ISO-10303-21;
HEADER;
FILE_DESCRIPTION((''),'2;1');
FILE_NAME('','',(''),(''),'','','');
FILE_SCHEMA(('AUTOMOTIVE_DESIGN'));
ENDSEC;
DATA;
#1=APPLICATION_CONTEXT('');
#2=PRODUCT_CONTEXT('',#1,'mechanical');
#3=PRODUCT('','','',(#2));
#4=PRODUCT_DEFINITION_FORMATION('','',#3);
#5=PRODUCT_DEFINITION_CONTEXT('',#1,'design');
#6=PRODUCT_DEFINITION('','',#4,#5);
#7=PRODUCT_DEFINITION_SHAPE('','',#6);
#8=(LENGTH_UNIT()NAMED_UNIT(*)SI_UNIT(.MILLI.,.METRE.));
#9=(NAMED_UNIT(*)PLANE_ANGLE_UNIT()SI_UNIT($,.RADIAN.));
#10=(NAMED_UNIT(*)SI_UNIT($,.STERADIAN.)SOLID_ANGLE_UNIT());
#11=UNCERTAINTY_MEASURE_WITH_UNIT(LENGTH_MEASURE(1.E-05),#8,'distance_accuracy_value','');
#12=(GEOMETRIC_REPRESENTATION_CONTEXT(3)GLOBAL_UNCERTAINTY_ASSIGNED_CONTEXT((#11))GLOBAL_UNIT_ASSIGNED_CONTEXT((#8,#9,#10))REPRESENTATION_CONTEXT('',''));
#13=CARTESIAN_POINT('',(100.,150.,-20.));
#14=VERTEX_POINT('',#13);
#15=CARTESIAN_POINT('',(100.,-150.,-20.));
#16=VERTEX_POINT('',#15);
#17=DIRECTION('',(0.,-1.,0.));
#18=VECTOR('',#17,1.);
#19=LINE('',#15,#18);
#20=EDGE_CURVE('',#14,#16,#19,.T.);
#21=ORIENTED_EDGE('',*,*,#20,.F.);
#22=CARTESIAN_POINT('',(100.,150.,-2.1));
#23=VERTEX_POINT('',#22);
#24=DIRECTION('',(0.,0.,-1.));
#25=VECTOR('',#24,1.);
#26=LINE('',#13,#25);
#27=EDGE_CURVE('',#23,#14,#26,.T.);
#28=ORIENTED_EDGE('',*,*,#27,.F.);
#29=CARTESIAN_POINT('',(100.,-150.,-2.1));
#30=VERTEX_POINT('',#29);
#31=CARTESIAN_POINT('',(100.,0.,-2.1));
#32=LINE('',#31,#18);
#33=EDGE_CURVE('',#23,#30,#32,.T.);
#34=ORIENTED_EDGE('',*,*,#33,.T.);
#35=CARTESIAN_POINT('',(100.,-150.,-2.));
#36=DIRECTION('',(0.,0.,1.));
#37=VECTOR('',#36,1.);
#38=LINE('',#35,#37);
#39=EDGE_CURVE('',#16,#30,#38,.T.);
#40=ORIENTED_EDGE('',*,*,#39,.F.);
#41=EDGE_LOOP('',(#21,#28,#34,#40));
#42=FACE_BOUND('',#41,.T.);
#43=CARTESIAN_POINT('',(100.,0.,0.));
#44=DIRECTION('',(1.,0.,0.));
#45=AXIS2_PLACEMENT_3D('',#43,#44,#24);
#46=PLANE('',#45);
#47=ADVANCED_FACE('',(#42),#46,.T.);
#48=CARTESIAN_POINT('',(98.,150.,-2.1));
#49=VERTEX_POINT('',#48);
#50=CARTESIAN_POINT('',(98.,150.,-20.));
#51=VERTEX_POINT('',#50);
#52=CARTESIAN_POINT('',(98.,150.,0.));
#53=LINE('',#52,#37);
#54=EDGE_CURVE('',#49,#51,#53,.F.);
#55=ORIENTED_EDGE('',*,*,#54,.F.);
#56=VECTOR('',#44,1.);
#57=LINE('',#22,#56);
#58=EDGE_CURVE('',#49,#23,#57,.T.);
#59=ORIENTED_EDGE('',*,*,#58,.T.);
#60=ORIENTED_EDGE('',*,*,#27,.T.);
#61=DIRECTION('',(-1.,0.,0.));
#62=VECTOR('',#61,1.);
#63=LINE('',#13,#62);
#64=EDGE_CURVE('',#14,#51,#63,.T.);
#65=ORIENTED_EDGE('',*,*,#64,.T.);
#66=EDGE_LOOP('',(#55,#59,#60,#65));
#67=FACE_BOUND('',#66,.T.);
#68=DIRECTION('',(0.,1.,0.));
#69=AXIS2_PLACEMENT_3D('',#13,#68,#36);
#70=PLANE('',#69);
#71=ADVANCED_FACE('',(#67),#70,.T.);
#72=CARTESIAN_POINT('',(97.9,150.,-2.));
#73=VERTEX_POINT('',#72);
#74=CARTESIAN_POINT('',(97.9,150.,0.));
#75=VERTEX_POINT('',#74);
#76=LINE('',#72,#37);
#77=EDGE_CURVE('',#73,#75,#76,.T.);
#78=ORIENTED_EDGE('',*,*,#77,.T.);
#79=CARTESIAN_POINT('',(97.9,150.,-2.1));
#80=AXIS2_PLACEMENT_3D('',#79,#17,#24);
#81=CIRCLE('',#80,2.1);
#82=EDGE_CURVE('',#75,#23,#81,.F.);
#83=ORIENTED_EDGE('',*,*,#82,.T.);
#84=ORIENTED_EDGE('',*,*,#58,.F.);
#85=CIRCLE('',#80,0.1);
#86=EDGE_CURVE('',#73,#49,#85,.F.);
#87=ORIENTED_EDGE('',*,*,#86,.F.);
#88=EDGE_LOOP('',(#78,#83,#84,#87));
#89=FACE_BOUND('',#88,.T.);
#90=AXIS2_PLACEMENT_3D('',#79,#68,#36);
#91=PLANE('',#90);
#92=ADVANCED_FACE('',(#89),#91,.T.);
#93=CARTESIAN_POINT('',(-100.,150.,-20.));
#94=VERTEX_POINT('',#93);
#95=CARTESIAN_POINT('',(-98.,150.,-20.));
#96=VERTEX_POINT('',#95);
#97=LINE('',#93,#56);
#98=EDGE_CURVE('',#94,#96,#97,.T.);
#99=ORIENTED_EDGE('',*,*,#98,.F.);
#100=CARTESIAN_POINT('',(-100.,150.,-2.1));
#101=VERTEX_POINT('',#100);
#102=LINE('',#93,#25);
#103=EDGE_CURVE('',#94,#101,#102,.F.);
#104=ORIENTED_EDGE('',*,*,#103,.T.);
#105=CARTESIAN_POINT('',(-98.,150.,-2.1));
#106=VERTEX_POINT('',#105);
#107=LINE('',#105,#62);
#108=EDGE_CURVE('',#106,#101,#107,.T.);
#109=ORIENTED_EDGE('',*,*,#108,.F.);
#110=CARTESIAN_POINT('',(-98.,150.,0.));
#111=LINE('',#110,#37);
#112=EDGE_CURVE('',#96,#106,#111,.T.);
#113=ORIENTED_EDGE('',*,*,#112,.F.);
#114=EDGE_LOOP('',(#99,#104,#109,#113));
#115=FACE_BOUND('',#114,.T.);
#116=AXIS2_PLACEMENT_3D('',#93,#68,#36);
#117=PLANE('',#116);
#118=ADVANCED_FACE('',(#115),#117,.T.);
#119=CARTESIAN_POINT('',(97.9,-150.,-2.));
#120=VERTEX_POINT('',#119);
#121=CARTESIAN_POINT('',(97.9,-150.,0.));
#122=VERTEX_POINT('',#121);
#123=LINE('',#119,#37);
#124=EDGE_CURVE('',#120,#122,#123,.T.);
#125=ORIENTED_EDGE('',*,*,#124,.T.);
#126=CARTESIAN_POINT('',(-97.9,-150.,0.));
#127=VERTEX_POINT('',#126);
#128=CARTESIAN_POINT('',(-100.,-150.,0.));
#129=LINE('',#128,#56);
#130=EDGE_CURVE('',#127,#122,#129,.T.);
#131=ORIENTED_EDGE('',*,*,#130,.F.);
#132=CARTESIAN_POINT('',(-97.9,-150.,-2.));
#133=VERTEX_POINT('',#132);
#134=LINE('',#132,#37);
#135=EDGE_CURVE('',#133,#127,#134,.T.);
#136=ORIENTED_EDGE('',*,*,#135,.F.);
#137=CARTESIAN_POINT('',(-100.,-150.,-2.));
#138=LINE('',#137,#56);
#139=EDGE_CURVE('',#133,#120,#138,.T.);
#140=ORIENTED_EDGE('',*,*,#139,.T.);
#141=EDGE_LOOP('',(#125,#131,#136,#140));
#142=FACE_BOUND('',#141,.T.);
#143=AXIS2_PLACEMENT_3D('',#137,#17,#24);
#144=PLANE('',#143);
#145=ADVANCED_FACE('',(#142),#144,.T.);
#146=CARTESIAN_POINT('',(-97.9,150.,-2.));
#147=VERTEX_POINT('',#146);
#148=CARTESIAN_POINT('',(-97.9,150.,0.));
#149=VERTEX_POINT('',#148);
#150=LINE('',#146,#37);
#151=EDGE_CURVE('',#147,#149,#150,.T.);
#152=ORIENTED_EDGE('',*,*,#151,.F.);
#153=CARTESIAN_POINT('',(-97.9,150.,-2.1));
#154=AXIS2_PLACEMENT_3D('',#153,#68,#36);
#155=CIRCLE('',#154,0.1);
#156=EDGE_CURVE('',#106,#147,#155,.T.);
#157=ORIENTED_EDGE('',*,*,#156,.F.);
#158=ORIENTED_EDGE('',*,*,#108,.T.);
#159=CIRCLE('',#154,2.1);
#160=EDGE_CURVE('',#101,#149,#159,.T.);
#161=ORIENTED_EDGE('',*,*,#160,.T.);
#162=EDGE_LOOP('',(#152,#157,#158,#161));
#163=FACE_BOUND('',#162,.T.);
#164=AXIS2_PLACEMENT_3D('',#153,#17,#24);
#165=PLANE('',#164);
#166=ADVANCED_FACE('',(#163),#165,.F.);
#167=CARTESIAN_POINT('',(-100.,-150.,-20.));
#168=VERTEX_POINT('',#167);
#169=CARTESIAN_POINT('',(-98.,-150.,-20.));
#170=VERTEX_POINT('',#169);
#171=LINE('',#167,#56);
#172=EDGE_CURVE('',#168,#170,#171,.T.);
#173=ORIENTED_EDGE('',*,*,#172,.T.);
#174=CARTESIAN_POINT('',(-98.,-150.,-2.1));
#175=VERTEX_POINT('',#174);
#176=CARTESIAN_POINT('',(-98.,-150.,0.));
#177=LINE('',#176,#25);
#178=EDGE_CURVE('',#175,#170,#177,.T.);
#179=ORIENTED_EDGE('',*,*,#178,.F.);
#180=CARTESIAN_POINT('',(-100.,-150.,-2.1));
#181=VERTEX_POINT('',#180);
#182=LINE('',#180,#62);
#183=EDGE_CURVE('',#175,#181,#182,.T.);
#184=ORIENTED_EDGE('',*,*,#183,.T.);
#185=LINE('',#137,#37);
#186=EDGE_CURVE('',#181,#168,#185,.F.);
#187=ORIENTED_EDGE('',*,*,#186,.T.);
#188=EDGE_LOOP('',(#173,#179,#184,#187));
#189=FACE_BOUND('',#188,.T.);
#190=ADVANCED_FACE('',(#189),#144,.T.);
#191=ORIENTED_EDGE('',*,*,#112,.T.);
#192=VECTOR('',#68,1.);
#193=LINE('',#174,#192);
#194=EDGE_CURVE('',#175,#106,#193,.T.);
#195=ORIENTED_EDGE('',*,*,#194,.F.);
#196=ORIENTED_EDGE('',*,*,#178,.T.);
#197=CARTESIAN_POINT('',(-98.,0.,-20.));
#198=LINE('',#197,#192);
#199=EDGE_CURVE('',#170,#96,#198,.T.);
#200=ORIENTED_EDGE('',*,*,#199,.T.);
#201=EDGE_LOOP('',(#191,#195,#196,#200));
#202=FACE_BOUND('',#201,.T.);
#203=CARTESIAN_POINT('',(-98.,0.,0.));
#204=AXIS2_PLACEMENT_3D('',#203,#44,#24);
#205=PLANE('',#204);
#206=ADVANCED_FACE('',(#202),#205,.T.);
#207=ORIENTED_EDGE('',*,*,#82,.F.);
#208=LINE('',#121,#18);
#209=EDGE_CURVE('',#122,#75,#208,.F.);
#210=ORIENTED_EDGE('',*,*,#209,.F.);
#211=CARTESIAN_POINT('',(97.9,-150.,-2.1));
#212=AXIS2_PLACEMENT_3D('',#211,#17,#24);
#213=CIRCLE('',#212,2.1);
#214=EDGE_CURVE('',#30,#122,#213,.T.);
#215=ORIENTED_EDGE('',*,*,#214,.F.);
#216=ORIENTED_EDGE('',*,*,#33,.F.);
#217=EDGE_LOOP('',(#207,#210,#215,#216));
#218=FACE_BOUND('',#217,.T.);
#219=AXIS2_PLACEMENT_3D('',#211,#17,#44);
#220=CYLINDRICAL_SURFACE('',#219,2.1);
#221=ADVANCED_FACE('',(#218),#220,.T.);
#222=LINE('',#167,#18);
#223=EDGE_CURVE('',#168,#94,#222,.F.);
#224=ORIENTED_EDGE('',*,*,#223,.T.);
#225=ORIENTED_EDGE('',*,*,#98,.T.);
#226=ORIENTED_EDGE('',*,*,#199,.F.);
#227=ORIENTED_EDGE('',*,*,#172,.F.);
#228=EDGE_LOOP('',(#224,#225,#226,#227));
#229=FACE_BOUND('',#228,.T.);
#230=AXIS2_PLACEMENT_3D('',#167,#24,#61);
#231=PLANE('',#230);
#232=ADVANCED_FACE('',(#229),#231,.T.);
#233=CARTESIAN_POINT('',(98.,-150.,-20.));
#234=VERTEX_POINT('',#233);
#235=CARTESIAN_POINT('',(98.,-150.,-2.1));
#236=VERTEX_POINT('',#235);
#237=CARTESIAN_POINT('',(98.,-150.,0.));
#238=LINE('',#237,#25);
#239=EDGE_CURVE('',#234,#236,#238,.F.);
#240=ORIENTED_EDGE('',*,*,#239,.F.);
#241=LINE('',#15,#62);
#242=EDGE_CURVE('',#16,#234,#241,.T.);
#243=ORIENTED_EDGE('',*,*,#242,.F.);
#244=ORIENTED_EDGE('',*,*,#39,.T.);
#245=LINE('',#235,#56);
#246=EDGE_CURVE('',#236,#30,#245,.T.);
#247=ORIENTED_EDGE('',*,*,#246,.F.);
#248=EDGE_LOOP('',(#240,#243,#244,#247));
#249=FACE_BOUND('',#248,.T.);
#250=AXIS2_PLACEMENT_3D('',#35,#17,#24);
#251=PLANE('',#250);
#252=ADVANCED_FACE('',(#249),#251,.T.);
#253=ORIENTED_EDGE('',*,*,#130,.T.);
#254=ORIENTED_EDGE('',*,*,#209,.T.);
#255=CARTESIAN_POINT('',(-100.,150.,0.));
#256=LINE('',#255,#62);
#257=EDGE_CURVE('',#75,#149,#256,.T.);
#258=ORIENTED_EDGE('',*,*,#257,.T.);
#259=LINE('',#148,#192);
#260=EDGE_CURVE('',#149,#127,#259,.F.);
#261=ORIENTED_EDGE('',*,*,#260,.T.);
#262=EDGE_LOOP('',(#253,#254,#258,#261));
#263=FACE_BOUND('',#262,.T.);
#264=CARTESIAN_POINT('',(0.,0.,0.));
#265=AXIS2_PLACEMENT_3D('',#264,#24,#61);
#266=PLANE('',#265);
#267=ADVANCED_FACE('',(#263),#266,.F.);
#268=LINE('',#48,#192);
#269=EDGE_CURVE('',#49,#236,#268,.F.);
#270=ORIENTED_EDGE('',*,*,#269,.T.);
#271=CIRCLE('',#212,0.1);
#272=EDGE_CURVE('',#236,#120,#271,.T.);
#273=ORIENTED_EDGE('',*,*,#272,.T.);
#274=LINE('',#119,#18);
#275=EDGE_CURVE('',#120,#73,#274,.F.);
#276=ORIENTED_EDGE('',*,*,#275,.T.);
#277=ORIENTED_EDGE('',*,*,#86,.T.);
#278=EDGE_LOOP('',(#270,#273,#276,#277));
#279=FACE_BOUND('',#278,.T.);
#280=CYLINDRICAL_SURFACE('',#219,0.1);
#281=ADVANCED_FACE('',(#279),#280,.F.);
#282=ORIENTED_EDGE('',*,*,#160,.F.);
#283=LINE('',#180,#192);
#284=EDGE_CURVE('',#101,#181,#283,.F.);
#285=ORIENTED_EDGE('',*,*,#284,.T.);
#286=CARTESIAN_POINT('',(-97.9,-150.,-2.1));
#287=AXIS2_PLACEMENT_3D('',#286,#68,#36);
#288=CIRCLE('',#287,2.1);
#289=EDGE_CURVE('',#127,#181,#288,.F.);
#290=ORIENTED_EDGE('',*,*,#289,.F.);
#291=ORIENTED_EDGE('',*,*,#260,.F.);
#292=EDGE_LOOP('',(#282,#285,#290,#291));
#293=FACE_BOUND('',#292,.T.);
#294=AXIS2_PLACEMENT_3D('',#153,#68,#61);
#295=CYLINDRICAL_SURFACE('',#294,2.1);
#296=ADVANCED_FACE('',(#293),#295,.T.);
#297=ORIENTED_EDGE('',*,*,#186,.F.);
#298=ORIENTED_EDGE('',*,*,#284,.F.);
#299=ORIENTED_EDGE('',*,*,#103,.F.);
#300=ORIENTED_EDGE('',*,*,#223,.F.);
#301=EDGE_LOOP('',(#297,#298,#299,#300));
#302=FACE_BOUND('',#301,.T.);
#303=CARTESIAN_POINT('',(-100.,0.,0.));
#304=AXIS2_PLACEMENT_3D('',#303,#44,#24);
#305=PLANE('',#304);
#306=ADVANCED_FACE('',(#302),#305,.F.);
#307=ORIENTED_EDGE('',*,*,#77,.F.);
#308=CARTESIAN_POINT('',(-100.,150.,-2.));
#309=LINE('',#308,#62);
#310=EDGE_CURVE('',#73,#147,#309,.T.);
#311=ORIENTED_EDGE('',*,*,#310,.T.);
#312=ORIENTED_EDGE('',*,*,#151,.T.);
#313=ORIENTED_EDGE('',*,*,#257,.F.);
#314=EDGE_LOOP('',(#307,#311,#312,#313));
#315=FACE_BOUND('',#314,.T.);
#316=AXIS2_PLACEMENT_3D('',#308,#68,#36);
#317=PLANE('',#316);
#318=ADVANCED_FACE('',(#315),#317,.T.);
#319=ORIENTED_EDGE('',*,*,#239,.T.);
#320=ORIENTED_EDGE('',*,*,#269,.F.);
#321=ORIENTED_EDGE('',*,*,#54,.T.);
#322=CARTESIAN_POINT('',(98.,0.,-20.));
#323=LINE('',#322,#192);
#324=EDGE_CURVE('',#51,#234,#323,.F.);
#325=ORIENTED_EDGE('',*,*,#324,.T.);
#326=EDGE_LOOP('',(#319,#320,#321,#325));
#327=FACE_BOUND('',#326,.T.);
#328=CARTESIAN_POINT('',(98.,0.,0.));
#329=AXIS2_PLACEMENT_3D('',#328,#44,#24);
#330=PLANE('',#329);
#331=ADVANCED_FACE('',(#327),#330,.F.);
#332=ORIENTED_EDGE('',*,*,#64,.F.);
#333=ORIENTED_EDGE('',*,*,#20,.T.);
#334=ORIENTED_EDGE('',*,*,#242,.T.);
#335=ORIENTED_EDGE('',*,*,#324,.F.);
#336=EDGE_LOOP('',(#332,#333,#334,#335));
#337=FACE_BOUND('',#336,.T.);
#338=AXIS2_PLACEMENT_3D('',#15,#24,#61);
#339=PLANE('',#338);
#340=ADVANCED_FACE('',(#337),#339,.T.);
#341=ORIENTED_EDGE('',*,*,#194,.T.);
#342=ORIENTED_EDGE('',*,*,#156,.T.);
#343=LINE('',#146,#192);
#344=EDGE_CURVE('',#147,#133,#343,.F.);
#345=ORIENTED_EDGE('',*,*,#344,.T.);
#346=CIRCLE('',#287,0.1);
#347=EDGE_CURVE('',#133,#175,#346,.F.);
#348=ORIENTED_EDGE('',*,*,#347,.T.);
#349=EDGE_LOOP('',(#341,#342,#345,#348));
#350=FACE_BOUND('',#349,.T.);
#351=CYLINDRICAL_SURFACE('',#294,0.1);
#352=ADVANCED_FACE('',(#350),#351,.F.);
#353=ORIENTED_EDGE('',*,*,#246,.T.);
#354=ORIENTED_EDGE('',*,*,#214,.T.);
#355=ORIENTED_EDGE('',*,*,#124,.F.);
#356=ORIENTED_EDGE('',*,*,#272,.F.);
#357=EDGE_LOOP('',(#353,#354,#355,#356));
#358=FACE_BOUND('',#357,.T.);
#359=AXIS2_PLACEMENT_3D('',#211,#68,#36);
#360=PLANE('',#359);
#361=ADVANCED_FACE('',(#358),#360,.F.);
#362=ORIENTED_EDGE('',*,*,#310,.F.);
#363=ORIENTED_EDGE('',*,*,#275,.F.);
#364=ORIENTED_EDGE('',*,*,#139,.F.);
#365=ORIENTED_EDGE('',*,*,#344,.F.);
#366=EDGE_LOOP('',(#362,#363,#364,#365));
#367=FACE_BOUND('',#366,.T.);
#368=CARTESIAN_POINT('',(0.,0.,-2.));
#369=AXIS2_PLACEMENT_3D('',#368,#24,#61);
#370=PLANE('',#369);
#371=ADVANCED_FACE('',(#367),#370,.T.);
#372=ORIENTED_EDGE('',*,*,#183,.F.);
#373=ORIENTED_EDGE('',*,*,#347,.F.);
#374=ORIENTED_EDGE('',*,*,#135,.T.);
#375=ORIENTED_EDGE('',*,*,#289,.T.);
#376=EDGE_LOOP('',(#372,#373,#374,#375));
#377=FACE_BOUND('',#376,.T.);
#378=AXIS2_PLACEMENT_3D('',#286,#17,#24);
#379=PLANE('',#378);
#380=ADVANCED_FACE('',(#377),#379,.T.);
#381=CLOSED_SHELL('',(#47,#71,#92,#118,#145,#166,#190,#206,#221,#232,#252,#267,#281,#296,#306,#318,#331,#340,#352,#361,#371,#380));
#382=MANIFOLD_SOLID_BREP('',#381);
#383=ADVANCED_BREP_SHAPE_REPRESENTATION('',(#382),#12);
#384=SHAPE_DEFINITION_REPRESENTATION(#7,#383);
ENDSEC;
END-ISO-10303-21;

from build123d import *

# Parameters (mm, degrees)
SKETCH_1_W                         = 200
SKETCH_1_H                         = 300
SM_BASE_FLANGE_1_DEPTH             = 2
SM_EDGE_FLANGE_1_STRIP_W           = 8.2
SM_EDGE_FLANGE_1_STRIP_H           = 2
SM_EDGE_FLANGE_1_STRIP_CUT_DEPTH   = 300
SM_EDGE_FLANGE_1_STRIP_2_W         = 8.2
SM_EDGE_FLANGE_1_STRIP_2_H         = 2
SM_EDGE_FLANGE_1_STRIP_CUT_2_DEPTH = 300
SM_EDGE_FLANGE_1_DEPTH             = 300
SM_EDGE_FLANGE_1_BEND_DEPTH        = 300


# Sheet-metal steps are written as plain solids
with BuildPart() as part:
    # Sketch 1 → 基体-法兰1 (new body)
    with BuildSketch(Plane.XY):
        Rectangle(SKETCH_1_W, SKETCH_1_H)
    extrude(amount=-SM_BASE_FLANGE_1_DEPTH)

    # 边线-法兰1 strip (across the edge) → 边线-法兰1 strip cut (cut)
    with BuildSketch(Plane(origin=(100, 150, -2), x_dir=(-1, 0, 0), z_dir=(0, -1, 0))):
        with Locations((-2, -1)):
            Rectangle(SM_EDGE_FLANGE_1_STRIP_W, SM_EDGE_FLANGE_1_STRIP_H)
    extrude(amount=SM_EDGE_FLANGE_1_STRIP_CUT_DEPTH, mode=Mode.SUBTRACT)

    # 边线-法兰1 strip 2 (across the edge) → 边线-法兰1 strip cut 2 (cut)
    with BuildSketch(Plane(origin=(-100, -150, -2), x_dir=(1, 0, 0), z_dir=(0, 1, 0))):
        with Locations((-2, -1)):
            Rectangle(SM_EDGE_FLANGE_1_STRIP_2_W, SM_EDGE_FLANGE_1_STRIP_2_H)
    extrude(amount=SM_EDGE_FLANGE_1_STRIP_CUT_2_DEPTH, mode=Mode.SUBTRACT)

    # 边线-法兰1 section (across the edge) → 边线-法兰1 (add)
    with BuildSketch(Plane(origin=(100, 150, -2), x_dir=(-1, 0, 0), z_dir=(0, -1, 0))):
        with BuildLine():
            Line((0, 0.1), (0, 18))
            Line((0, 18), (2, 18))
            Line((2, 18), (2, 0.1))
            ThreePointArc((2, 0.1), (2.029289322, 0.029289322), (2.1, 0))
            Line((2.1, 0), (2.1, -2))
            ThreePointArc((2.1, -2), (0.61507576, -1.38492424), (0, 0.1))
        make_face()
    extrude(amount=SM_EDGE_FLANGE_1_DEPTH)

    # 边线-法兰1 section 2 (across the edge) → 边线-法兰1 bend (add)
    with BuildSketch(Plane(origin=(-100, -150, -2), x_dir=(1, 0, 0), z_dir=(0, 1, 0))):
        with BuildLine():
            Line((0, 0.1), (0, 18))
            Line((0, 18), (2, 18))
            Line((2, 18), (2, 0.1))
            ThreePointArc((2, 0.1), (2.029289322, 0.029289322), (2.1, 0))
            Line((2.1, 0), (2.1, -2))
            ThreePointArc((2.1, -2), (0.61507576, -1.38492424), (0, 0.1))
        make_face()
    extrude(amount=SM_EDGE_FLANGE_1_BEND_DEPTH)


solid = part.part
